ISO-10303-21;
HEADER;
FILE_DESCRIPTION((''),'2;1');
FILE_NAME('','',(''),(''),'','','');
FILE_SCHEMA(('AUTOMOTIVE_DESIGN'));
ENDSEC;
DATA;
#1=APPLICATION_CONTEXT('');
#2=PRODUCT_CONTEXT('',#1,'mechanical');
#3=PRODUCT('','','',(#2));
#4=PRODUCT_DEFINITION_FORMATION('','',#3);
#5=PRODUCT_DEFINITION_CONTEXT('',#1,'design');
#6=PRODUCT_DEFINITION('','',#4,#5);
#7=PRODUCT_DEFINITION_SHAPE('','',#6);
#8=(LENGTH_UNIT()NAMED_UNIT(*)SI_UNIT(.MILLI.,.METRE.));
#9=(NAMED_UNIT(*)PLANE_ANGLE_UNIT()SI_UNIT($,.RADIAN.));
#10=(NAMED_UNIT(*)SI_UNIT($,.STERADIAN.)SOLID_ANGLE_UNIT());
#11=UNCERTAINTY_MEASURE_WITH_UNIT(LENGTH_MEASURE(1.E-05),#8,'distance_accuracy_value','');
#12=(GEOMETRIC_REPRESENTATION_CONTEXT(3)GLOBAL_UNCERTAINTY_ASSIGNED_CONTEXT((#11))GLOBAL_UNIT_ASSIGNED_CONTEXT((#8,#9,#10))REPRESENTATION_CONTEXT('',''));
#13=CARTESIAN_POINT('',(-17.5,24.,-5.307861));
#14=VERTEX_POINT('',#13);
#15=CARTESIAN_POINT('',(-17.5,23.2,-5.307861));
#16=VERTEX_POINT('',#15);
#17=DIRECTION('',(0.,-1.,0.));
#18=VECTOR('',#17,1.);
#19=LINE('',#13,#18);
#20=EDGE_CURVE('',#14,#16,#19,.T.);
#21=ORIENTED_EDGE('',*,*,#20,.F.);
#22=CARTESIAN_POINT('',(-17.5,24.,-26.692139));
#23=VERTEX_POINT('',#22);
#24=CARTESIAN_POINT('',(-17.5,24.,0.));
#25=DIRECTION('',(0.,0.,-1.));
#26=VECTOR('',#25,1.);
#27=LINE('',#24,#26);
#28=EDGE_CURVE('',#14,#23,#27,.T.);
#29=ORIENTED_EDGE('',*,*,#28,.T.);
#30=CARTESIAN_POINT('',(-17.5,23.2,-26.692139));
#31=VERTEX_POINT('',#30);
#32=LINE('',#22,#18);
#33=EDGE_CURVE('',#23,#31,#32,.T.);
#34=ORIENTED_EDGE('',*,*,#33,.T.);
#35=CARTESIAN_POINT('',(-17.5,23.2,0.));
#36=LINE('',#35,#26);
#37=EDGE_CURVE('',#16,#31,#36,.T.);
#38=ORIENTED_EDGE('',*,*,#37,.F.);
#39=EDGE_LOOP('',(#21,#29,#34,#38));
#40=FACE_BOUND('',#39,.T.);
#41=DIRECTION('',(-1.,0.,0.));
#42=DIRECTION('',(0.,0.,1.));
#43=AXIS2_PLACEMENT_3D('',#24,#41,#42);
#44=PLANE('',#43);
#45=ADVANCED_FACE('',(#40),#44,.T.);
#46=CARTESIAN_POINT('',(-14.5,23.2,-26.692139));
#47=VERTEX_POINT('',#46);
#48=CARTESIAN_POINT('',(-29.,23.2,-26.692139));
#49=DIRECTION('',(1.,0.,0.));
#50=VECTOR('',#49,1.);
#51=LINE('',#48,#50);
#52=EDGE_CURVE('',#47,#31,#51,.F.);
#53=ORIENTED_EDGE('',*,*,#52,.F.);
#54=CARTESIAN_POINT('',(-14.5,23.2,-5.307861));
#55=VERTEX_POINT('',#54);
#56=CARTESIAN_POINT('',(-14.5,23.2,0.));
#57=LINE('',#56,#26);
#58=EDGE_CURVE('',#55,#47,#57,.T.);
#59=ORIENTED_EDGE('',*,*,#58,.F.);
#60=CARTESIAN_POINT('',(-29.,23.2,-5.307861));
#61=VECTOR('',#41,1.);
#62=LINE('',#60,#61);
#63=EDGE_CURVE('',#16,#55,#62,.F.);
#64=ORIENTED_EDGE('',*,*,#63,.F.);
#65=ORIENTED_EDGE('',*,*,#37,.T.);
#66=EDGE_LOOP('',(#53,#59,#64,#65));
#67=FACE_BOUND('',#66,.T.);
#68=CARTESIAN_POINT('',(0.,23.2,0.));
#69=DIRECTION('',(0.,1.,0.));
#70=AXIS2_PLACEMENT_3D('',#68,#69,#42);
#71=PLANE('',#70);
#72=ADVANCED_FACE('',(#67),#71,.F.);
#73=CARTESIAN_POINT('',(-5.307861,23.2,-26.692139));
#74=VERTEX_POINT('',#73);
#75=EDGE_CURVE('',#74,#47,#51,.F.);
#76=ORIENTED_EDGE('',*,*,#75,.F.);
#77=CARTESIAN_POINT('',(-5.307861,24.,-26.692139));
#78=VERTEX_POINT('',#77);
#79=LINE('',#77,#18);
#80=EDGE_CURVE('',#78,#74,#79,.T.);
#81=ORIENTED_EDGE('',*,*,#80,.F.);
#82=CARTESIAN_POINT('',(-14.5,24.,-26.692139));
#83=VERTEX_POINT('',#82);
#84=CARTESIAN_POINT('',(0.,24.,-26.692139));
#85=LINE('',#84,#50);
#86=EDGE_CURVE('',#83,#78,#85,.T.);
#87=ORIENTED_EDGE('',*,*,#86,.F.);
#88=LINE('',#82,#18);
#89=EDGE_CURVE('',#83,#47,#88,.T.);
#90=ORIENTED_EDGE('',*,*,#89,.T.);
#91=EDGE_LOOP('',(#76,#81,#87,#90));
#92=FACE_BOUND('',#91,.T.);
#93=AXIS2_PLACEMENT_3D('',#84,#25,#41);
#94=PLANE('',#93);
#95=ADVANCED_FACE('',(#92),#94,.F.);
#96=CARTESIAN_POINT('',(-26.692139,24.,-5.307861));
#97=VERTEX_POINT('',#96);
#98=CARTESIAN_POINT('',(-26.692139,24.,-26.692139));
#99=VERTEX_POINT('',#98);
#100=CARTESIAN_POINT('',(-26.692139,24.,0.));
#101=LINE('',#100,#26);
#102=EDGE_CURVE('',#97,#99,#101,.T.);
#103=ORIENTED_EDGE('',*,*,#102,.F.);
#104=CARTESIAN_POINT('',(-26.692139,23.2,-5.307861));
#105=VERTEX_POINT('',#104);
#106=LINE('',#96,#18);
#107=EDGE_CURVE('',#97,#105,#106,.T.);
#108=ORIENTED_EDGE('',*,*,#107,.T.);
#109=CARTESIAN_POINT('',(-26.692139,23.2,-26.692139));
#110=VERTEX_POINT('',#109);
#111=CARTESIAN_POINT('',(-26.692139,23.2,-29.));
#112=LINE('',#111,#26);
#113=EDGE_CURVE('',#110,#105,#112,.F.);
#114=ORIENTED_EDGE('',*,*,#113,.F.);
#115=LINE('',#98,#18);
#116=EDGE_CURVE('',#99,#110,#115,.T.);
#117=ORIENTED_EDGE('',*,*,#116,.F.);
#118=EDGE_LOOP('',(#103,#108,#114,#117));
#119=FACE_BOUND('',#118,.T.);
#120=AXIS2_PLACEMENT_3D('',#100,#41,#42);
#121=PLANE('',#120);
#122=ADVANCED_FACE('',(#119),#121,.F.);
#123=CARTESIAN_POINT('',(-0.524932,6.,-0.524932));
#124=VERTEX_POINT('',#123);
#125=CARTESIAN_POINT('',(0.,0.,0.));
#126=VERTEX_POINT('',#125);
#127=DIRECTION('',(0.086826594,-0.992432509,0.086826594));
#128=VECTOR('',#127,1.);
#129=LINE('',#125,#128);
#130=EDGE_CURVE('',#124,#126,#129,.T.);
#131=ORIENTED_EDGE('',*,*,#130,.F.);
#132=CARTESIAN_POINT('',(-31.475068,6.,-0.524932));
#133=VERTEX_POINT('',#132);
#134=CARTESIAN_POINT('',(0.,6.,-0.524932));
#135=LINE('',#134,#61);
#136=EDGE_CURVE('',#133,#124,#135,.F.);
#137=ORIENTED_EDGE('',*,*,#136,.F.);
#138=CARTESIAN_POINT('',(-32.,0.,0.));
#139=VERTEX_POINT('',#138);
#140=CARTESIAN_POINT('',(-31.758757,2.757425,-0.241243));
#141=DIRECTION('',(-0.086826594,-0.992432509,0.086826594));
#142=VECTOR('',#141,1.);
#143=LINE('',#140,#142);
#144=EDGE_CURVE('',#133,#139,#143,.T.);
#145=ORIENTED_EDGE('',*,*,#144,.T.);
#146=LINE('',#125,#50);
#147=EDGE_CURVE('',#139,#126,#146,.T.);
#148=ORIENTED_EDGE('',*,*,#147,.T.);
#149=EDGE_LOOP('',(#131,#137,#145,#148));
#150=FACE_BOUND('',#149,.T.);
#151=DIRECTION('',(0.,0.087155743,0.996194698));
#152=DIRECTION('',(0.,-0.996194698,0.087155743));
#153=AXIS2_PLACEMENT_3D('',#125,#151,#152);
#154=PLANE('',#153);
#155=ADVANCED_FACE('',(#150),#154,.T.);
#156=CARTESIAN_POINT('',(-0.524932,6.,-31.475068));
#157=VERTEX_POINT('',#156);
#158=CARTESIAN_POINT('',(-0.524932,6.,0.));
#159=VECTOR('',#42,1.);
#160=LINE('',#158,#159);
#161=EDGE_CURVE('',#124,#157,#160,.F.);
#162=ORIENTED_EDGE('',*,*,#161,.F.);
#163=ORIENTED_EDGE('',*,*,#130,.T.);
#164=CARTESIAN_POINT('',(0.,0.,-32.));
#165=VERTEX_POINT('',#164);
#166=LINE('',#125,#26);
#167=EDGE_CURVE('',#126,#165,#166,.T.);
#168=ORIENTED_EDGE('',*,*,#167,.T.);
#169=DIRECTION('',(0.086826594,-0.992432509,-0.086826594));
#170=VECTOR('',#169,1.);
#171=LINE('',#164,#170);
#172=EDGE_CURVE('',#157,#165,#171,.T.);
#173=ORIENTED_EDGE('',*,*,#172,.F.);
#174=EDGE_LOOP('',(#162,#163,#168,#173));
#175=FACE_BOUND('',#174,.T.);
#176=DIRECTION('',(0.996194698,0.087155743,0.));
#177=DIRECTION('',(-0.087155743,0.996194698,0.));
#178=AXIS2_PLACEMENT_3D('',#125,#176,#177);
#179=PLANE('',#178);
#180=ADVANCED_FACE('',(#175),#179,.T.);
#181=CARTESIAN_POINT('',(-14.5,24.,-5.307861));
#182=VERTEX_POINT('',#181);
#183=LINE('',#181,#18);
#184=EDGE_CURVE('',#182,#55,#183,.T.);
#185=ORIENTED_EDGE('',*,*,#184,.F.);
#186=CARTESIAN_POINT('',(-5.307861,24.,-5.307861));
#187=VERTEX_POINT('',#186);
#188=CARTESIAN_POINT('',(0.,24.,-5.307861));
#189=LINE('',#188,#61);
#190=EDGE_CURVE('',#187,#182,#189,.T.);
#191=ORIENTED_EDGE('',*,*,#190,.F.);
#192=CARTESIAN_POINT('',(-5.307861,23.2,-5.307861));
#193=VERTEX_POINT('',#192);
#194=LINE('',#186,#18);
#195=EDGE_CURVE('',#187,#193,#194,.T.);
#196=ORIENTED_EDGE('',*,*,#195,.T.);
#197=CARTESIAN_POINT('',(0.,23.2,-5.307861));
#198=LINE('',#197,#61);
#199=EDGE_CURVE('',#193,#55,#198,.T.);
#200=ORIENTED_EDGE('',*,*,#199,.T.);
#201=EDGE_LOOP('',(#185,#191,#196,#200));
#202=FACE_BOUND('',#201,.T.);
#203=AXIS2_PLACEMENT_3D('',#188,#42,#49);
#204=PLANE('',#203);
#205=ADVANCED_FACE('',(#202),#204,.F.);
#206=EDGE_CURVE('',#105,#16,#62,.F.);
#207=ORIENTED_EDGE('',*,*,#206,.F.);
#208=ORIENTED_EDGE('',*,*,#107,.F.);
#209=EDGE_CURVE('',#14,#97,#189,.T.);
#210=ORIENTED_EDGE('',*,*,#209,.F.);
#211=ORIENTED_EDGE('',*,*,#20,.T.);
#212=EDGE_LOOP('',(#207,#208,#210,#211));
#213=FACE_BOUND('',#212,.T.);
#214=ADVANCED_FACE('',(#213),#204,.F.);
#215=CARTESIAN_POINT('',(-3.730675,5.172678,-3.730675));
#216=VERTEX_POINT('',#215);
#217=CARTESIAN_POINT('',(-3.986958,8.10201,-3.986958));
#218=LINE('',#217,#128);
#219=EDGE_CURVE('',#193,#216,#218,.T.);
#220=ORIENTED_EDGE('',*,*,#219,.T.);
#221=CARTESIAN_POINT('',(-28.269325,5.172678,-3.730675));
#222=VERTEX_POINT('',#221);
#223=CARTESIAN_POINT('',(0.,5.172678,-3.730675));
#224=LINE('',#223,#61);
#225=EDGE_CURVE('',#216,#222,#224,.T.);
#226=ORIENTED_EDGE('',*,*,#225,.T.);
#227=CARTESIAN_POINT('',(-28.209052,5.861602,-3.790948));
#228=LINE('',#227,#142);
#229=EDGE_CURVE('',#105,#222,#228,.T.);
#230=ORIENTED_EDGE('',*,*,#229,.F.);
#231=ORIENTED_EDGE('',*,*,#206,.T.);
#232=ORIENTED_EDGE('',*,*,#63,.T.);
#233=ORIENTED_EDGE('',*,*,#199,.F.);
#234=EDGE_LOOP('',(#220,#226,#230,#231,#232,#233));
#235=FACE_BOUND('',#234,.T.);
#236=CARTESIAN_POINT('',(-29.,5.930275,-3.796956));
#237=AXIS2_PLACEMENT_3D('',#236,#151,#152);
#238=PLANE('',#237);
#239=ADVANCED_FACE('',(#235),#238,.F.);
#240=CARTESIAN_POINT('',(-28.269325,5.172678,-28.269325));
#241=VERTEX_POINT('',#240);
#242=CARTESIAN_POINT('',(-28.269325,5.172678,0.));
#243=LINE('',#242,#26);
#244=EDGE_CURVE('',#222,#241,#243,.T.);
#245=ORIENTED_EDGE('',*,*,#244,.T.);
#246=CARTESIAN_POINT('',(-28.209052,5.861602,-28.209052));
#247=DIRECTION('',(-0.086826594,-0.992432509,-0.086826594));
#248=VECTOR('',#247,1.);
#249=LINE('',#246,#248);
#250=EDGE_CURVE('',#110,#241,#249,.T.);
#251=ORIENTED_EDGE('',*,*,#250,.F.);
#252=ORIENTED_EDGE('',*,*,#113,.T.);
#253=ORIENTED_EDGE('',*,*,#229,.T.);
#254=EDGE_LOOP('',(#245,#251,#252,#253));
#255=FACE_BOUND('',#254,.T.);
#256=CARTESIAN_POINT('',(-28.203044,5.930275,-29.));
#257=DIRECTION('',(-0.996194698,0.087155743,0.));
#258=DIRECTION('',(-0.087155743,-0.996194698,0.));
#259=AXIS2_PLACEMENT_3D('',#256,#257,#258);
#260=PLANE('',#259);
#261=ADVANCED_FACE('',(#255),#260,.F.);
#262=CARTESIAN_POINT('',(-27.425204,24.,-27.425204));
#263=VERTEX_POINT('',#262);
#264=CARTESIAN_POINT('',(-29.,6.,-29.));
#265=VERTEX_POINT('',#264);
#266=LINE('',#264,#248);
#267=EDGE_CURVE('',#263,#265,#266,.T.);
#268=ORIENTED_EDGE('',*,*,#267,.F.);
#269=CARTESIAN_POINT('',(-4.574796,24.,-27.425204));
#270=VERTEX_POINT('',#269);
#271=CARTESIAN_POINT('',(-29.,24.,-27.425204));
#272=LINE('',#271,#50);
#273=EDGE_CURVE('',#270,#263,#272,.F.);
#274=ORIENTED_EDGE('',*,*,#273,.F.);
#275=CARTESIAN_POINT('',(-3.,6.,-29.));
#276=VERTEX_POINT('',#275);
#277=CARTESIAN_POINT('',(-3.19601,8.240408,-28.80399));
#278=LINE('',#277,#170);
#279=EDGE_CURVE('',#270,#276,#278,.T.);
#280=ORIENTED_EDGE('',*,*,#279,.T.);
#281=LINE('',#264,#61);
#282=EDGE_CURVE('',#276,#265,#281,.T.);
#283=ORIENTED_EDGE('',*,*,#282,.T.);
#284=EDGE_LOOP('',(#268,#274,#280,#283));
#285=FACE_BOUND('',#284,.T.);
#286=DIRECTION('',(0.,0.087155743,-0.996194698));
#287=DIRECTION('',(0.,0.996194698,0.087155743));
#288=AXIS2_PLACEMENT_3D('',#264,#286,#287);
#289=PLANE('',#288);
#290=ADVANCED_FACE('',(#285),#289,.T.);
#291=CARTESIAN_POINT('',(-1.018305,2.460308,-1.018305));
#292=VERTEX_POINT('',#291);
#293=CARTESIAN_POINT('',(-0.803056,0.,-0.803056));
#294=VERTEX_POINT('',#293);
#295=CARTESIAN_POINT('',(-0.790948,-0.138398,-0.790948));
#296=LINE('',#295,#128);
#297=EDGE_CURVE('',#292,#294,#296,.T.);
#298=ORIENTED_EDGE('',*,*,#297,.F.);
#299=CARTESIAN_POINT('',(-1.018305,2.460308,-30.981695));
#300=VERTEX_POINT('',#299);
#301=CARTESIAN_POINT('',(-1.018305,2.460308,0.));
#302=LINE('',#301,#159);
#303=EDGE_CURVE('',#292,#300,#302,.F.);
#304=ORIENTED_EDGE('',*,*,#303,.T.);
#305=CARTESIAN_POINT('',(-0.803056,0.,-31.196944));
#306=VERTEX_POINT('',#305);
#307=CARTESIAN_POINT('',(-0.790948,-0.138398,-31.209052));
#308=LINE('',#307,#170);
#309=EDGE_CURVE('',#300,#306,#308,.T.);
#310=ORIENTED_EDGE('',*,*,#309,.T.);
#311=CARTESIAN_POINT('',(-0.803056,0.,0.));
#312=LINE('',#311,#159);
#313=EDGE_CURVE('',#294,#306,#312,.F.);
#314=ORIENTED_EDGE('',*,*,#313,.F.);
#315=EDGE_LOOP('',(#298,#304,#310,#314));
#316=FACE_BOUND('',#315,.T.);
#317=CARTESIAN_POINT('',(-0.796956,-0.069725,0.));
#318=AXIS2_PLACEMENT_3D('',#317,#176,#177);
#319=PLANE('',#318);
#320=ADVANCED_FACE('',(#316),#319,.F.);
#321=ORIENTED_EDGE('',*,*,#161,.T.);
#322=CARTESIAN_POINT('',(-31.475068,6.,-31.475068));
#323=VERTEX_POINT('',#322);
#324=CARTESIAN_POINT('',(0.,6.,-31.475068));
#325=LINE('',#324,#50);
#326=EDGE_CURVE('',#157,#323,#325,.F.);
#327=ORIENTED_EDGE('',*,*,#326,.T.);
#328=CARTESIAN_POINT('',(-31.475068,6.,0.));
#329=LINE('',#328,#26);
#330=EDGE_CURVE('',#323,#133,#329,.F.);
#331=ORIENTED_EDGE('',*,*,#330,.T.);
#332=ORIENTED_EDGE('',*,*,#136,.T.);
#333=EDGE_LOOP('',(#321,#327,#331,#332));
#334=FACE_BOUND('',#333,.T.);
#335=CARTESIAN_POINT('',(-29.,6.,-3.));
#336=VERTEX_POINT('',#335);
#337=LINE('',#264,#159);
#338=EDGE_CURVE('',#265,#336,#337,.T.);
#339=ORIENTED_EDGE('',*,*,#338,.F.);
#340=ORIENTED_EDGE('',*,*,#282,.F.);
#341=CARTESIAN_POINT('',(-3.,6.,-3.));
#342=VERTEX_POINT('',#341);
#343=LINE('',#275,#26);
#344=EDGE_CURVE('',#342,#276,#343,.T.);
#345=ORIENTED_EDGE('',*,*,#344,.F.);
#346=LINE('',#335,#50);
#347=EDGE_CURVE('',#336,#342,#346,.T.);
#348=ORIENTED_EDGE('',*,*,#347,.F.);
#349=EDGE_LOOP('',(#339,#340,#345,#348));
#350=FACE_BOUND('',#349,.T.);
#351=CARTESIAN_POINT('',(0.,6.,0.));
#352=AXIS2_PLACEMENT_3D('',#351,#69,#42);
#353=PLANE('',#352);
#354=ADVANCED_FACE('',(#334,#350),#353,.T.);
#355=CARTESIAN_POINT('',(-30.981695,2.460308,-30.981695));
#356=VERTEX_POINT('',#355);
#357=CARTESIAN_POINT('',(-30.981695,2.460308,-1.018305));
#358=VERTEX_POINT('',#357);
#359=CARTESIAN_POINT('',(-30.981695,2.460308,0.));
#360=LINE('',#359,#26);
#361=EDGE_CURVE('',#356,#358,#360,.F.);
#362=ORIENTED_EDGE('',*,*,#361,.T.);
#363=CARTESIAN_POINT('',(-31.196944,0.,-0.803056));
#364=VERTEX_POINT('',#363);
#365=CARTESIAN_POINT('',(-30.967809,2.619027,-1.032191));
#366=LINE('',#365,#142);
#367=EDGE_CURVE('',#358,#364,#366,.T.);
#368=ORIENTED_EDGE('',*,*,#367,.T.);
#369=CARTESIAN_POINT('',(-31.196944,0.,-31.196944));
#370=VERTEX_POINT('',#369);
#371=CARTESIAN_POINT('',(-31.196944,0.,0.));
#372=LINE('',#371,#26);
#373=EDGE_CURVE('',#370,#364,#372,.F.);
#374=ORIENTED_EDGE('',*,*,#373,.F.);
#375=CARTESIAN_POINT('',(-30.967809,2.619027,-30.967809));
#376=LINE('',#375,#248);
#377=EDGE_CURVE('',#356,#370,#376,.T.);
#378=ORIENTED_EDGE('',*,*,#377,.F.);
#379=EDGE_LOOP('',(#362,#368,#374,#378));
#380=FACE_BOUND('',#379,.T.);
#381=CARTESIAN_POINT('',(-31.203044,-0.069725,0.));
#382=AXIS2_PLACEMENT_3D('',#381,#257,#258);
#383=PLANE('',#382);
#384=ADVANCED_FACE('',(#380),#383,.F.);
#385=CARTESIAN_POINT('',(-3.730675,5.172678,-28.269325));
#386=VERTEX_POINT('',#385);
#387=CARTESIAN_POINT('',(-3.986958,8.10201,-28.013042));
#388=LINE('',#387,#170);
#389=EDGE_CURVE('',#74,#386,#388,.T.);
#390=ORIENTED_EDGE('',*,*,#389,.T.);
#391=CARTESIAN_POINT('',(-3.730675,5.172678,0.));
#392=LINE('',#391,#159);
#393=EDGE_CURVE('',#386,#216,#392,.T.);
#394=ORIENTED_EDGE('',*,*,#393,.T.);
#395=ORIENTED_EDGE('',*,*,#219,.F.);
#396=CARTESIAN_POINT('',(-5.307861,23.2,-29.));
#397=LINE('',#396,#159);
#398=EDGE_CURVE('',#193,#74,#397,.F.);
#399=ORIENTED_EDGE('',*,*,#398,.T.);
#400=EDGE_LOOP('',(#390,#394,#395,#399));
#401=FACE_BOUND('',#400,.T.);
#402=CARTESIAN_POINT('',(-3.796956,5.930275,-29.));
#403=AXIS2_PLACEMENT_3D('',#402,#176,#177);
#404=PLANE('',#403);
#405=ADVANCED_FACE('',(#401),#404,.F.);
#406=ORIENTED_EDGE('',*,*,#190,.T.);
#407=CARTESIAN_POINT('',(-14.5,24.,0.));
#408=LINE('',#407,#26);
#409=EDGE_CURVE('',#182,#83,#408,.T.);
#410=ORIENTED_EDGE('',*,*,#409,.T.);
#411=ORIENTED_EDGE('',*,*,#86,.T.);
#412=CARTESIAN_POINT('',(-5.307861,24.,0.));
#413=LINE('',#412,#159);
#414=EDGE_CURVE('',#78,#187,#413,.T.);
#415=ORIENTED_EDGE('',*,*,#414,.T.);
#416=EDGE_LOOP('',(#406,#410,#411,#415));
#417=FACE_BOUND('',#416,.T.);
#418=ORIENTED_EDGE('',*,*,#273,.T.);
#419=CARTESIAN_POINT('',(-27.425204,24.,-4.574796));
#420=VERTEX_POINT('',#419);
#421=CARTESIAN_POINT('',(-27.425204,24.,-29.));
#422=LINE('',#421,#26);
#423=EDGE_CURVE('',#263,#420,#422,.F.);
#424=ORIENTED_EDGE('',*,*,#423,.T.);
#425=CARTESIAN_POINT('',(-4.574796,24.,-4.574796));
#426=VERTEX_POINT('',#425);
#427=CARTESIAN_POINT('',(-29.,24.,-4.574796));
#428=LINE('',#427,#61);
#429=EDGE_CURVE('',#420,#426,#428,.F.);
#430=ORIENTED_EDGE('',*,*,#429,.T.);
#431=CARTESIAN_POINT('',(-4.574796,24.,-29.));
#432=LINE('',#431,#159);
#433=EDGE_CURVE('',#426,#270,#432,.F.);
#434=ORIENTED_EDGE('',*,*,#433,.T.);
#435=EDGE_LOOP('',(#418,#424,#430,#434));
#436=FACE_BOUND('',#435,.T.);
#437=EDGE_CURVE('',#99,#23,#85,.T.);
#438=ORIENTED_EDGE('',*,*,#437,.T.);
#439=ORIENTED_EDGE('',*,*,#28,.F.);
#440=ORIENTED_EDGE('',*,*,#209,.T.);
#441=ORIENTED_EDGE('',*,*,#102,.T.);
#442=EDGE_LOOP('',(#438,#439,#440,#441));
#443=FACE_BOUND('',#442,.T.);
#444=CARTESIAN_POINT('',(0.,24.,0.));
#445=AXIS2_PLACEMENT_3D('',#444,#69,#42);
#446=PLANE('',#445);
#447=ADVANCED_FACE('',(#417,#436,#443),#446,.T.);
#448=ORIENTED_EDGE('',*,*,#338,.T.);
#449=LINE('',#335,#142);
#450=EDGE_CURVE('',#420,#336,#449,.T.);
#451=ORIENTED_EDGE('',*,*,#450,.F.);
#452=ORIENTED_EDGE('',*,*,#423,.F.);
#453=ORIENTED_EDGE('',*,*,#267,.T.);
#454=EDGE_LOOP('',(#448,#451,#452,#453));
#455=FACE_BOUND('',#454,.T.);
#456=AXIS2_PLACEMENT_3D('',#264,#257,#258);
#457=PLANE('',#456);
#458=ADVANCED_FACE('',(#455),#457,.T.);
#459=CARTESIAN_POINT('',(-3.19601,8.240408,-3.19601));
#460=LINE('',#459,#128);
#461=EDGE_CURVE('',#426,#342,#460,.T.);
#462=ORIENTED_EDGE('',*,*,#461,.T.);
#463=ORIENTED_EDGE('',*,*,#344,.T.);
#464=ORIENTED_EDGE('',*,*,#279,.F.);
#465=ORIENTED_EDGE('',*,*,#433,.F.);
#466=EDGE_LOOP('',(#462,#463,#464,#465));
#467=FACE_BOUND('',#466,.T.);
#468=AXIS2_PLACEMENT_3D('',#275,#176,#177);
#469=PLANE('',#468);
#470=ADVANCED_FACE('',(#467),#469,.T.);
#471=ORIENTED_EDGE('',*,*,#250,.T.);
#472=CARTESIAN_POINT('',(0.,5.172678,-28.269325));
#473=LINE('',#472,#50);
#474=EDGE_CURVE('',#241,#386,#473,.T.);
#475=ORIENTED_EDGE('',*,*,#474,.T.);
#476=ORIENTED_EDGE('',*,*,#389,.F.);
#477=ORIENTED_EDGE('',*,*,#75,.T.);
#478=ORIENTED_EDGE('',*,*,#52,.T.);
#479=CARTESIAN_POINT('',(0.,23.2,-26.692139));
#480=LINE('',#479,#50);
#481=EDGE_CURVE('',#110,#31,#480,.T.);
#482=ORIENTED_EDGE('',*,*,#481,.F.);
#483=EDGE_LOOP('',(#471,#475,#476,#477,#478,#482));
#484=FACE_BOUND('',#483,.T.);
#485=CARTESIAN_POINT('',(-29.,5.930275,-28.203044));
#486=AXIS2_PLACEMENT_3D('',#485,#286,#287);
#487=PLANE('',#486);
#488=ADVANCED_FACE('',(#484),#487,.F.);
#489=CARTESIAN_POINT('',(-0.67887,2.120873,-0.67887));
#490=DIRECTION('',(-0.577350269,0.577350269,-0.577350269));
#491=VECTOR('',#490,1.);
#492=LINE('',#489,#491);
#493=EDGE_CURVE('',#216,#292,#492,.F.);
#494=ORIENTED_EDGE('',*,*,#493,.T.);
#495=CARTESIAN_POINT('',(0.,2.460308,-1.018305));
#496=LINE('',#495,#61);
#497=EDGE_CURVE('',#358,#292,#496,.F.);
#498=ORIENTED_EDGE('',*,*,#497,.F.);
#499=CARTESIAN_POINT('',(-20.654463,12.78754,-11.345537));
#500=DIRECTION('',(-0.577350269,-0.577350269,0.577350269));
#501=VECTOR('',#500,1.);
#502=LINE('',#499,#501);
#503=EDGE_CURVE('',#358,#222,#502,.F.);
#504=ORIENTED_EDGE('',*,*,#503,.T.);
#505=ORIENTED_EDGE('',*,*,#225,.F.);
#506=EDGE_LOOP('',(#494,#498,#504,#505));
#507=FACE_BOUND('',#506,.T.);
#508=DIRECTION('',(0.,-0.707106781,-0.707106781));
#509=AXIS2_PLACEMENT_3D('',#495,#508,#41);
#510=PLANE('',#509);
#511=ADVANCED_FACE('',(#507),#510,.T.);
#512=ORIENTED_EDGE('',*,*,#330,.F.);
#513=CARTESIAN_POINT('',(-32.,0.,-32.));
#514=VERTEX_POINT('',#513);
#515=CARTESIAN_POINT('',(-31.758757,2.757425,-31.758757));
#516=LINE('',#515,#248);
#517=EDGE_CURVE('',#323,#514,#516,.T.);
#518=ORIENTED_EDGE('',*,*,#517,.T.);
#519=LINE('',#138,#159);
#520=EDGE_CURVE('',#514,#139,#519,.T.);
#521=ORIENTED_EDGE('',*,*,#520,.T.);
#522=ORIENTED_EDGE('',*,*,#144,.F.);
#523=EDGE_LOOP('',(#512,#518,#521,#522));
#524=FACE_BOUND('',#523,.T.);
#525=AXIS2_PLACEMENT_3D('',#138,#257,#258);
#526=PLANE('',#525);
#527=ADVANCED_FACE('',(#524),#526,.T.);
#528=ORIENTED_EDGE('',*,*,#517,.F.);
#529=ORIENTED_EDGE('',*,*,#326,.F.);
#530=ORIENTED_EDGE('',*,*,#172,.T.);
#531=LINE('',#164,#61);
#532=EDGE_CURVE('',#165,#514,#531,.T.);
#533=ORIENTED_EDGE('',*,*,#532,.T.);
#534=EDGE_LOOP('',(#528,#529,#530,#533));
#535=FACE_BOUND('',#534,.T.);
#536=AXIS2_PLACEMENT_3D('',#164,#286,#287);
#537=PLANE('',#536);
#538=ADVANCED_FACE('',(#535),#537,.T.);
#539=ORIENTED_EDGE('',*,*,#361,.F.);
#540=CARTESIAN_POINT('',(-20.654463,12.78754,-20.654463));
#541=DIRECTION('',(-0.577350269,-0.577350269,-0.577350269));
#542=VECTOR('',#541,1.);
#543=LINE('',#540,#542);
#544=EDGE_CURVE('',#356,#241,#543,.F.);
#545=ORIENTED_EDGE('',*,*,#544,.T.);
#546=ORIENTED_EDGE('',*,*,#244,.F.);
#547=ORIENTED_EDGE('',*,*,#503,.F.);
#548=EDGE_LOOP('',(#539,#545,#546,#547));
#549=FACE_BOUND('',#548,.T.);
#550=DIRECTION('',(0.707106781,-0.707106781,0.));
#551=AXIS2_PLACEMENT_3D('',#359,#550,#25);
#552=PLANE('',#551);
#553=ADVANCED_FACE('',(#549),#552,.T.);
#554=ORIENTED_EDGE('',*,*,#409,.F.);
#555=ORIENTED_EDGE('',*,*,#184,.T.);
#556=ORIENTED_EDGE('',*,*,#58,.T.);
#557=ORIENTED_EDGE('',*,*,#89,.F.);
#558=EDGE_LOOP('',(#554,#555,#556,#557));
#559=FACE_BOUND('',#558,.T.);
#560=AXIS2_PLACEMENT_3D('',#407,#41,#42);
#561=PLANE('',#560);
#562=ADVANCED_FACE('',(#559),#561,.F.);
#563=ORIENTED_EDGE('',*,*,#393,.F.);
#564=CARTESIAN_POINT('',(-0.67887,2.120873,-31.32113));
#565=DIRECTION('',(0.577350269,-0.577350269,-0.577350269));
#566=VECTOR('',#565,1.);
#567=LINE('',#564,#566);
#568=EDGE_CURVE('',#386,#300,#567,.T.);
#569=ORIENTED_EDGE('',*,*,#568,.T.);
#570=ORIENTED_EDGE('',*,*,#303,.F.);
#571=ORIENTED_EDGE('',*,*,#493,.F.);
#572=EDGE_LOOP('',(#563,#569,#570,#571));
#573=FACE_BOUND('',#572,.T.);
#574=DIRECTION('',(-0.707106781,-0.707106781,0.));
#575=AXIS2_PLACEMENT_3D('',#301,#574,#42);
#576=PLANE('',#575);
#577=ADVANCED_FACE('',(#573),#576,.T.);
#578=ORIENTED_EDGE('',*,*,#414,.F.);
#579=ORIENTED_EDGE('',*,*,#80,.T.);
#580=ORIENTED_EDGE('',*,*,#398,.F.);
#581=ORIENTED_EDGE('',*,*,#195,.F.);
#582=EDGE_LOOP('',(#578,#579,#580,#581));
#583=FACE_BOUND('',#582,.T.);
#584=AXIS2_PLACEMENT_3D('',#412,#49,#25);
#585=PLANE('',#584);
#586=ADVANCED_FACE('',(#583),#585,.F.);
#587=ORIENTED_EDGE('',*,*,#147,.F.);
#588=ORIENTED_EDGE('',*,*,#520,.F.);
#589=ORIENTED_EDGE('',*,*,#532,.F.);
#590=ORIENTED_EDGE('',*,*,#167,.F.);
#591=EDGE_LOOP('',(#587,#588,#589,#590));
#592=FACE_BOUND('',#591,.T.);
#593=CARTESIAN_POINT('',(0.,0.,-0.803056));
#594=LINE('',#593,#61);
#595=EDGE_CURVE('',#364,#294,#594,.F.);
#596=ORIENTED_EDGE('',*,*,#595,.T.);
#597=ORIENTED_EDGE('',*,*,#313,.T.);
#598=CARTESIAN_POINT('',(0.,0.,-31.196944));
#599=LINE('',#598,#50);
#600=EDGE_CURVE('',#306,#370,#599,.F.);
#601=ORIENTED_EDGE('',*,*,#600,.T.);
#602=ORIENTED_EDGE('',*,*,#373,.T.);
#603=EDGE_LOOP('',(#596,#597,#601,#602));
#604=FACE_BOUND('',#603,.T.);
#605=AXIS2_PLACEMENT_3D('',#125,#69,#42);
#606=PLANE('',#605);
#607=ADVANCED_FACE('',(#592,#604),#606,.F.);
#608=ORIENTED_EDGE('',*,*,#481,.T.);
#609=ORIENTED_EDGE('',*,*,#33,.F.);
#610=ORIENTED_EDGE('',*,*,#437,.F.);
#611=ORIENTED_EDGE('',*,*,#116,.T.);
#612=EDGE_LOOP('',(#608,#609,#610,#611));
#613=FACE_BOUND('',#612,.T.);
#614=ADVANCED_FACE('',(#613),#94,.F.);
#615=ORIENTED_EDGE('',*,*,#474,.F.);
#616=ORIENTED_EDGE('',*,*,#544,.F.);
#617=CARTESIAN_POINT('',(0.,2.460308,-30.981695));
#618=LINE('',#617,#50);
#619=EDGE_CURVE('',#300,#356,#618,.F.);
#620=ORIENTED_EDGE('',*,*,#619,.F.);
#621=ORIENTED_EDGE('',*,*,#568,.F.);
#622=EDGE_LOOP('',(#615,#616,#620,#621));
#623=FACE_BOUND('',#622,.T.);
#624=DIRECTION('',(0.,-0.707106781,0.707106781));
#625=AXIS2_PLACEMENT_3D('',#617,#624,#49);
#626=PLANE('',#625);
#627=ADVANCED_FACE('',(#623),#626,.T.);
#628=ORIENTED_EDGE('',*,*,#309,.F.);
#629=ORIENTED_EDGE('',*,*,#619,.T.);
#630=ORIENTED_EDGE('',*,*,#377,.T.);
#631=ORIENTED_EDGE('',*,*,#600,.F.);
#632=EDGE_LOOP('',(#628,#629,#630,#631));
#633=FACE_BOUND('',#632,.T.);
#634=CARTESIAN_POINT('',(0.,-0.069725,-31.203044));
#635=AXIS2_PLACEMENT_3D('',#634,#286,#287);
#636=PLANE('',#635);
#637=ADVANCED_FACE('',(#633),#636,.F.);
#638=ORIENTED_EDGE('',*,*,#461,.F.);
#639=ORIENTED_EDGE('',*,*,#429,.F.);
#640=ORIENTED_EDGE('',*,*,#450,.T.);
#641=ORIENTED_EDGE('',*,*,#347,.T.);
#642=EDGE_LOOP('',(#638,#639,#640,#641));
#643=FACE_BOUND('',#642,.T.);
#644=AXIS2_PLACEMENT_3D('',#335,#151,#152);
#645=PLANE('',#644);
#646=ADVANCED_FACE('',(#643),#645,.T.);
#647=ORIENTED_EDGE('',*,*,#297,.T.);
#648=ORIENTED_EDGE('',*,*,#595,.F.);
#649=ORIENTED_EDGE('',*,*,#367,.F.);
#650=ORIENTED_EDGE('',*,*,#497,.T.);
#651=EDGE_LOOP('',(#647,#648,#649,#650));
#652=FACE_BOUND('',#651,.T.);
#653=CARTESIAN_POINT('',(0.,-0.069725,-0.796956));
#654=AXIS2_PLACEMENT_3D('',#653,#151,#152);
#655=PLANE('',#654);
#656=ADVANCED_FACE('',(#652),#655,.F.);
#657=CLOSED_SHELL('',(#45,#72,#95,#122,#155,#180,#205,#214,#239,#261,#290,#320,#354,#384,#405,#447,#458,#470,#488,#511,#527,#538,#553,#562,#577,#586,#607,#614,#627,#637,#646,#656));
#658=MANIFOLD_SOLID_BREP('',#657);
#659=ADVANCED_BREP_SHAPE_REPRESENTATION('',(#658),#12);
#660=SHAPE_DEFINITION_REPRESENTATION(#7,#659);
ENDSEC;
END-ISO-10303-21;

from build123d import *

# Parameters (mm, degrees)
SKETCH1_W           = 32
SKETCH1_H           = 32
BOSS_EXTRUDE1_DEPTH = 6
BOSS_EXTRUDE1_TAPER = 5
SKETCH2_W           = 26
SKETCH2_H           = 26
BOSS_EXTRUDE2_DEPTH = 18
BOSS_EXTRUDE2_TAPER = 5
SHELL1_T            = -0.8
CHAMFER1_SIZE       = 2.5
CHAMFER1_SIZE_2     = 2.750157169
SKETCH3_W           = 9.192139117
SKETCH3_H           = 21.384278234
CUT_EXTRUDE1_DEPTH  = 51.855088412


with BuildPart() as part:
    # Sketch1 → Boss-Extrude1 (new body)
    with BuildSketch(Plane(origin=(0, 0, 0), x_dir=(1, 0, 0), z_dir=(0, 1, 0))):
        with Locations((-16, 16)):
            Rectangle(SKETCH1_W, SKETCH1_H)
    extrude(amount=BOSS_EXTRUDE1_DEPTH, taper=BOSS_EXTRUDE1_TAPER)

    # Sketch2 → Boss-Extrude2 (add)
    with BuildSketch(Plane(origin=(0, 6, 0), x_dir=(1, 0, 0), z_dir=(0, 1, 0))):
        with Locations((-16, 16)):
            Rectangle(SKETCH2_W, SKETCH2_H)
    extrude(amount=BOSS_EXTRUDE2_DEPTH, taper=BOSS_EXTRUDE2_TAPER)

    # Shell1
    shell1_openings = [part.faces().sort_by_distance(p)[0] for p in [
        (-16, 0, -16),
    ]]
    offset(amount=SHELL1_T, openings=shell1_openings, kind=Kind.INTERSECTION)

    # Chamfer1
    # the kernel refuses this chamfer: 2.750157169, 2.5 mm, written as the material it adds along each edge
    with BuildSketch(Plane(origin=(5.830274952, 5.2, -1.25799692), x_dir=(0, 0.030161850139926293, -0.9995450278982617), z_dir=(-1, 0, 0))) as chamfer1_piece_1_section:
        Polygon((CHAMFER1_SIZE * 0.999545027898, CHAMFER1_SIZE * 0.0301618501399), (-CHAMFER1_SIZE_2 * 0.117163164513, CHAMFER1_SIZE_2 * 0.993112678869), (0, 0), align=None)
    chamfer1_piece_1 = extrude(amount=43.660549905, mode=Mode.PRIVATE)
    chamfer1_piece_1 = split(chamfer1_piece_1, bisect_by=Plane(origin=(-1.2737044, 5.379537315, -3.779154262), z_dir=(-0.9961946980917455, -0.08715574274765792, 0)), keep=Keep.TOP, mode=Mode.PRIVATE)
    chamfer1_piece_1 = split(chamfer1_piece_1, bisect_by=Plane(origin=(-3.729971497, 5.164641789, -3.779154262), z_dir=(0.9961946980917455, 0.08715574274765821, 0)), keep=Keep.TOP, mode=Mode.PRIVATE)
    chamfer1_piece_1 = split(chamfer1_piece_1, bisect_by=Plane(origin=(-2.501837948, 5.275543614, -3.739674149), z_dir=(0, -0.08715574274765829, -0.9961946980917455)), keep=Keep.TOP, mode=Mode.PRIVATE)
    add(chamfer1_piece_1)
    with BuildSketch(Plane(origin=(5.830274952, 5.2, -1.25799692), x_dir=(0, 0.030161850139926293, -0.9995450278982617), z_dir=(-1, 0, 0))) as chamfer1_piece_2_section:
        Polygon((CHAMFER1_SIZE * 0.999545027898, CHAMFER1_SIZE * 0.0301618501399), (-CHAMFER1_SIZE_2 * 0.117163164513, CHAMFER1_SIZE_2 * 0.993112678869), (0, 0), align=None)
    chamfer1_piece_2 = extrude(amount=43.660549905, mode=Mode.PRIVATE)
    chamfer1_piece_2 = split(chamfer1_piece_2, bisect_by=Plane(origin=(-1.187972058, 4.399612159, -1.99521412), z_dir=(-0.9961946980917455, -0.08715574274765792, 0)), keep=Keep.TOP, mode=Mode.PRIVATE)
    chamfer1_piece_2 = split(chamfer1_piece_2, bisect_by=Plane(origin=(-3.644239154, 4.184716633, -1.99521412), z_dir=(0.9961946980917455, 0.08715574274765821, 0)), keep=Keep.TOP, mode=Mode.PRIVATE)
    chamfer1_piece_2 = split(chamfer1_piece_2, bisect_by=Plane(origin=(-2.416105606, 4.148173113, -3.641042011), z_dir=(0, 0.08715574274765829, 0.9961946980917455)), keep=Keep.TOP, mode=Mode.PRIVATE)
    add(chamfer1_piece_2)
    with BuildSketch(Plane(origin=(5.830274952, 5.2, -1.25799692), x_dir=(0, 0.030161850139926293, -0.9995450278982617), z_dir=(-1, 0, 0))) as chamfer1_piece_3_section:
        Polygon((CHAMFER1_SIZE * 0.999545027898, CHAMFER1_SIZE * 0.0301618501399), (-CHAMFER1_SIZE_2 * 0.117163164513, CHAMFER1_SIZE_2 * 0.993112678869), (0, 0), align=None)
    chamfer1_piece_3 = extrude(amount=43.660549905, mode=Mode.PRIVATE)
    chamfer1_piece_3 = split(chamfer1_piece_3, bisect_by=Plane(origin=(-3.747130429, 5.360769289, -1.993289961), z_dir=(-0.9961946980917455, -0.08715574274765821, 0)), keep=Keep.TOP, mode=Mode.PRIVATE)
    chamfer1_piece_3 = split(chamfer1_piece_3, bisect_by=Plane(origin=(-16, 4.144649452, -3.64073373), z_dir=(0, 0.08715574274765829, 0.9961946980917455)), keep=Keep.TOP, mode=Mode.PRIVATE)
    chamfer1_piece_3 = split(chamfer1_piece_3, bisect_by=Plane(origin=(-28.252869571, 5.360769289, -1.993289961), z_dir=(0.9961946980917455, -0.08715574274765829, 0)), keep=Keep.TOP, mode=Mode.PRIVATE)
    add(chamfer1_piece_3)
    with BuildSketch(Plane(origin=(5.830274952, 5.2, -1.25799692), x_dir=(0, 0.030161850139926293, -0.9995450278982617), z_dir=(-1, 0, 0))) as chamfer1_piece_4_section:
        Polygon((CHAMFER1_SIZE * 0.999545027898, CHAMFER1_SIZE * 0.0301618501399), (-CHAMFER1_SIZE_2 * 0.117163164513, CHAMFER1_SIZE_2 * 0.993112678869), (0, 0), align=None)
    chamfer1_piece_4 = extrude(amount=43.660549905, mode=Mode.PRIVATE)
    chamfer1_piece_4 = split(chamfer1_piece_4, bisect_by=Plane(origin=(-29.498162052, 5.275543614, -3.739674149), z_dir=(0, -0.08715574274765829, -0.9961946980917455)), keep=Keep.TOP, mode=Mode.PRIVATE)
    chamfer1_piece_4 = split(chamfer1_piece_4, bisect_by=Plane(origin=(-28.270028503, 5.164641789, -3.779154262), z_dir=(-0.9961946980917455, 0.08715574274765829, 0)), keep=Keep.TOP, mode=Mode.PRIVATE)
    chamfer1_piece_4 = split(chamfer1_piece_4, bisect_by=Plane(origin=(-30.7262956, 5.379537315, -3.779154262), z_dir=(0.9961946980917455, -0.08715574274765851, 0)), keep=Keep.TOP, mode=Mode.PRIVATE)
    add(chamfer1_piece_4)
    with BuildSketch(Plane(origin=(5.830274952, 5.2, -1.25799692), x_dir=(0, 0.030161850139926293, -0.9995450278982617), z_dir=(-1, 0, 0))) as chamfer1_piece_5_section:
        Polygon((CHAMFER1_SIZE * 0.999545027898, CHAMFER1_SIZE * 0.0301618501399), (-CHAMFER1_SIZE_2 * 0.117163164513, CHAMFER1_SIZE_2 * 0.993112678869), (0, 0), align=None)
    chamfer1_piece_5 = extrude(amount=43.660549905, mode=Mode.PRIVATE)
    chamfer1_piece_5 = split(chamfer1_piece_5, bisect_by=Plane(origin=(-29.583894394, 4.148173113, -3.641042011), z_dir=(0, 0.08715574274765829, 0.9961946980917455)), keep=Keep.TOP, mode=Mode.PRIVATE)
    chamfer1_piece_5 = split(chamfer1_piece_5, bisect_by=Plane(origin=(-28.355760846, 4.184716633, -1.99521412), z_dir=(-0.9961946980917455, 0.08715574274765829, 0)), keep=Keep.TOP, mode=Mode.PRIVATE)
    chamfer1_piece_5 = split(chamfer1_piece_5, bisect_by=Plane(origin=(-30.812027942, 4.399612159, -1.99521412), z_dir=(0.9961946980917455, -0.08715574274765851, 0)), keep=Keep.TOP, mode=Mode.PRIVATE)
    add(chamfer1_piece_5)
    with BuildSketch(Plane(origin=(-30.74200308, 5.2, 5.830274952), x_dir=(0.9995450278982617, 0.030161850139926356, 0), z_dir=(0, 0, -1))) as chamfer1_piece_6_section:
        Polygon((CHAMFER1_SIZE * 0.999545027898, CHAMFER1_SIZE * 0.0301618501399), (-CHAMFER1_SIZE_2 * 0.117163164513, CHAMFER1_SIZE_2 * 0.993112678869), (0, 0), align=None)
    chamfer1_piece_6 = extrude(amount=43.660549905, mode=Mode.PRIVATE)
    chamfer1_piece_6 = split(chamfer1_piece_6, bisect_by=Plane(origin=(-28.220845738, 5.164641789, -3.729971497), z_dir=(0, 0.08715574274765829, 0.9961946980917455)), keep=Keep.TOP, mode=Mode.PRIVATE)
    chamfer1_piece_6 = split(chamfer1_piece_6, bisect_by=Plane(origin=(-28.260325851, 5.275543614, -2.501837948), z_dir=(0.9961946980917455, -0.08715574274765829, 0)), keep=Keep.TOP, mode=Mode.PRIVATE)
    chamfer1_piece_6 = split(chamfer1_piece_6, bisect_by=Plane(origin=(-28.220845738, 5.379537315, -1.2737044), z_dir=(0, -0.08715574274765792, -0.9961946980917455)), keep=Keep.TOP, mode=Mode.PRIVATE)
    add(chamfer1_piece_6)
    with BuildSketch(Plane(origin=(-30.74200308, 5.2, 5.830274952), x_dir=(0.9995450278982617, 0.030161850139926356, 0), z_dir=(0, 0, -1))) as chamfer1_piece_7_section:
        Polygon((CHAMFER1_SIZE * 0.999545027898, CHAMFER1_SIZE * 0.0301618501399), (-CHAMFER1_SIZE_2 * 0.117163164513, CHAMFER1_SIZE_2 * 0.993112678869), (0, 0), align=None)
    chamfer1_piece_7 = extrude(amount=43.660549905, mode=Mode.PRIVATE)
    chamfer1_piece_7 = split(chamfer1_piece_7, bisect_by=Plane(origin=(-30.00478588, 4.184716633, -3.644239154), z_dir=(0, 0.08715574274765829, 0.9961946980917455)), keep=Keep.TOP, mode=Mode.PRIVATE)
    chamfer1_piece_7 = split(chamfer1_piece_7, bisect_by=Plane(origin=(-28.358957989, 4.148173113, -2.416105606), z_dir=(-0.9961946980917455, 0.08715574274765829, 0)), keep=Keep.TOP, mode=Mode.PRIVATE)
    chamfer1_piece_7 = split(chamfer1_piece_7, bisect_by=Plane(origin=(-30.00478588, 4.399612159, -1.187972058), z_dir=(0, -0.08715574274765792, -0.9961946980917455)), keep=Keep.TOP, mode=Mode.PRIVATE)
    add(chamfer1_piece_7)
    with BuildSketch(Plane(origin=(-30.74200308, 5.2, 5.830274952), x_dir=(0.9995450278982617, 0.030161850139926356, 0), z_dir=(0, 0, -1))) as chamfer1_piece_8_section:
        Polygon((CHAMFER1_SIZE * 0.999545027898, CHAMFER1_SIZE * 0.0301618501399), (-CHAMFER1_SIZE_2 * 0.117163164513, CHAMFER1_SIZE_2 * 0.993112678869), (0, 0), align=None)
    chamfer1_piece_8 = extrude(amount=43.660549905, mode=Mode.PRIVATE)
    chamfer1_piece_8 = split(chamfer1_piece_8, bisect_by=Plane(origin=(-30.006710039, 5.360769289, -28.252869571), z_dir=(0, -0.08715574274765829, 0.9961946980917455)), keep=Keep.TOP, mode=Mode.PRIVATE)
    chamfer1_piece_8 = split(chamfer1_piece_8, bisect_by=Plane(origin=(-30.006710039, 5.360769289, -3.747130429), z_dir=(0, -0.08715574274765829, -0.9961946980917455)), keep=Keep.TOP, mode=Mode.PRIVATE)
    chamfer1_piece_8 = split(chamfer1_piece_8, bisect_by=Plane(origin=(-28.35926627, 4.144649452, -16), z_dir=(-0.9961946980917455, 0.08715574274765829, 0)), keep=Keep.TOP, mode=Mode.PRIVATE)
    add(chamfer1_piece_8)
    with BuildSketch(Plane(origin=(-30.74200308, 5.2, 5.830274952), x_dir=(0.9995450278982617, 0.030161850139926356, 0), z_dir=(0, 0, -1))) as chamfer1_piece_9_section:
        Polygon((CHAMFER1_SIZE * 0.999545027898, CHAMFER1_SIZE * 0.0301618501399), (-CHAMFER1_SIZE_2 * 0.117163164513, CHAMFER1_SIZE_2 * 0.993112678869), (0, 0), align=None)
    chamfer1_piece_9 = extrude(amount=43.660549905, mode=Mode.PRIVATE)
    chamfer1_piece_9 = split(chamfer1_piece_9, bisect_by=Plane(origin=(-28.220845738, 5.379537315, -30.7262956), z_dir=(0, -0.08715574274765836, 0.9961946980917455)), keep=Keep.TOP, mode=Mode.PRIVATE)
    chamfer1_piece_9 = split(chamfer1_piece_9, bisect_by=Plane(origin=(-28.220845738, 5.164641789, -28.270028503), z_dir=(0, 0.08715574274765829, -0.9961946980917455)), keep=Keep.TOP, mode=Mode.PRIVATE)
    chamfer1_piece_9 = split(chamfer1_piece_9, bisect_by=Plane(origin=(-28.260325851, 5.275543614, -29.498162052), z_dir=(0.9961946980917455, -0.08715574274765829, 0)), keep=Keep.TOP, mode=Mode.PRIVATE)
    add(chamfer1_piece_9)
    with BuildSketch(Plane(origin=(-30.74200308, 5.2, 5.830274952), x_dir=(0.9995450278982617, 0.030161850139926356, 0), z_dir=(0, 0, -1))) as chamfer1_piece_10_section:
        Polygon((CHAMFER1_SIZE * 0.999545027898, CHAMFER1_SIZE * 0.0301618501399), (-CHAMFER1_SIZE_2 * 0.117163164513, CHAMFER1_SIZE_2 * 0.993112678869), (0, 0), align=None)
    chamfer1_piece_10 = extrude(amount=43.660549905, mode=Mode.PRIVATE)
    chamfer1_piece_10 = split(chamfer1_piece_10, bisect_by=Plane(origin=(-30.00478588, 4.399612159, -30.812027942), z_dir=(0, -0.08715574274765836, 0.9961946980917455)), keep=Keep.TOP, mode=Mode.PRIVATE)
    chamfer1_piece_10 = split(chamfer1_piece_10, bisect_by=Plane(origin=(-30.00478588, 4.184716633, -28.355760846), z_dir=(0, 0.08715574274765829, -0.9961946980917455)), keep=Keep.TOP, mode=Mode.PRIVATE)
    chamfer1_piece_10 = split(chamfer1_piece_10, bisect_by=Plane(origin=(-28.358957989, 4.148173113, -29.583894394), z_dir=(-0.9961946980917455, 0.08715574274765829, 0)), keep=Keep.TOP, mode=Mode.PRIVATE)
    add(chamfer1_piece_10)
    with BuildSketch(Plane(origin=(5.830274952, 5.2, -30.74200308), x_dir=(0, -0.9937112432628153, -0.11197305485280758), z_dir=(-1, 0, 0))) as chamfer1_piece_11_section:
        Polygon((CHAMFER1_SIZE_2 * 0.99968896676, CHAMFER1_SIZE_2 * 0.0249393220908), (-CHAMFER1_SIZE * 0.111973054853, CHAMFER1_SIZE * 0.993711243263), (0, 0), align=None)
    chamfer1_piece_11 = extrude(amount=43.660549905, mode=Mode.PRIVATE)
    chamfer1_piece_11 = split(chamfer1_piece_11, bisect_by=Plane(origin=(-1.187972058, 4.399612159, -30.00478588), z_dir=(-0.9961946980917455, -0.08715574274765792, 0)), keep=Keep.TOP, mode=Mode.PRIVATE)
    chamfer1_piece_11 = split(chamfer1_piece_11, bisect_by=Plane(origin=(-2.416105606, 4.148173113, -28.358957989), z_dir=(0, 0.08715574274765829, -0.9961946980917455)), keep=Keep.TOP, mode=Mode.PRIVATE)
    chamfer1_piece_11 = split(chamfer1_piece_11, bisect_by=Plane(origin=(-3.644239154, 4.184716633, -30.00478588), z_dir=(0.9961946980917455, 0.08715574274765821, 0)), keep=Keep.TOP, mode=Mode.PRIVATE)
    add(chamfer1_piece_11)
    with BuildSketch(Plane(origin=(5.830274952, 5.2, -30.74200308), x_dir=(0, -0.9937112432628153, -0.11197305485280758), z_dir=(-1, 0, 0))) as chamfer1_piece_12_section:
        Polygon((CHAMFER1_SIZE_2 * 0.99968896676, CHAMFER1_SIZE_2 * 0.0249393220908), (-CHAMFER1_SIZE * 0.111973054853, CHAMFER1_SIZE * 0.993711243263), (0, 0), align=None)
    chamfer1_piece_12 = extrude(amount=43.660549905, mode=Mode.PRIVATE)
    chamfer1_piece_12 = split(chamfer1_piece_12, bisect_by=Plane(origin=(-1.2737044, 5.379537315, -28.220845738), z_dir=(-0.9961946980917455, -0.08715574274765792, 0)), keep=Keep.TOP, mode=Mode.PRIVATE)
    chamfer1_piece_12 = split(chamfer1_piece_12, bisect_by=Plane(origin=(-2.501837948, 5.275543614, -28.260325851), z_dir=(0, -0.08715574274765829, 0.9961946980917455)), keep=Keep.TOP, mode=Mode.PRIVATE)
    chamfer1_piece_12 = split(chamfer1_piece_12, bisect_by=Plane(origin=(-3.729971497, 5.164641789, -28.220845738), z_dir=(0.9961946980917455, 0.08715574274765821, 0)), keep=Keep.TOP, mode=Mode.PRIVATE)
    add(chamfer1_piece_12)
    with BuildSketch(Plane(origin=(5.830274952, 5.2, -30.74200308), x_dir=(0, -0.9937112432628153, -0.11197305485280758), z_dir=(-1, 0, 0))) as chamfer1_piece_13_section:
        Polygon((CHAMFER1_SIZE_2 * 0.99968896676, CHAMFER1_SIZE_2 * 0.0249393220908), (-CHAMFER1_SIZE * 0.111973054853, CHAMFER1_SIZE * 0.993711243263), (0, 0), align=None)
    chamfer1_piece_13 = extrude(amount=43.660549905, mode=Mode.PRIVATE)
    chamfer1_piece_13 = split(chamfer1_piece_13, bisect_by=Plane(origin=(-16, 4.144649452, -28.35926627), z_dir=(0, 0.08715574274765829, -0.9961946980917455)), keep=Keep.TOP, mode=Mode.PRIVATE)
    chamfer1_piece_13 = split(chamfer1_piece_13, bisect_by=Plane(origin=(-3.747130429, 5.360769289, -30.006710039), z_dir=(-0.9961946980917455, -0.08715574274765821, 0)), keep=Keep.TOP, mode=Mode.PRIVATE)
    chamfer1_piece_13 = split(chamfer1_piece_13, bisect_by=Plane(origin=(-28.252869571, 5.360769289, -30.006710039), z_dir=(0.9961946980917455, -0.08715574274765829, 0)), keep=Keep.TOP, mode=Mode.PRIVATE)
    add(chamfer1_piece_13)
    with BuildSketch(Plane(origin=(5.830274952, 5.2, -30.74200308), x_dir=(0, -0.9937112432628153, -0.11197305485280758), z_dir=(-1, 0, 0))) as chamfer1_piece_14_section:
        Polygon((CHAMFER1_SIZE_2 * 0.99968896676, CHAMFER1_SIZE_2 * 0.0249393220908), (-CHAMFER1_SIZE * 0.111973054853, CHAMFER1_SIZE * 0.993711243263), (0, 0), align=None)
    chamfer1_piece_14 = extrude(amount=43.660549905, mode=Mode.PRIVATE)
    chamfer1_piece_14 = split(chamfer1_piece_14, bisect_by=Plane(origin=(-30.812027942, 4.399612159, -30.00478588), z_dir=(0.9961946980917455, -0.08715574274765851, 0)), keep=Keep.TOP, mode=Mode.PRIVATE)
    chamfer1_piece_14 = split(chamfer1_piece_14, bisect_by=Plane(origin=(-29.583894394, 4.148173113, -28.358957989), z_dir=(0, 0.08715574274765829, -0.9961946980917455)), keep=Keep.TOP, mode=Mode.PRIVATE)
    chamfer1_piece_14 = split(chamfer1_piece_14, bisect_by=Plane(origin=(-28.355760846, 4.184716633, -30.00478588), z_dir=(-0.9961946980917455, 0.08715574274765829, 0)), keep=Keep.TOP, mode=Mode.PRIVATE)
    add(chamfer1_piece_14)
    with BuildSketch(Plane(origin=(5.830274952, 5.2, -30.74200308), x_dir=(0, -0.9937112432628153, -0.11197305485280758), z_dir=(-1, 0, 0))) as chamfer1_piece_15_section:
        Polygon((CHAMFER1_SIZE_2 * 0.99968896676, CHAMFER1_SIZE_2 * 0.0249393220908), (-CHAMFER1_SIZE * 0.111973054853, CHAMFER1_SIZE * 0.993711243263), (0, 0), align=None)
    chamfer1_piece_15 = extrude(amount=43.660549905, mode=Mode.PRIVATE)
    chamfer1_piece_15 = split(chamfer1_piece_15, bisect_by=Plane(origin=(-30.7262956, 5.379537315, -28.220845738), z_dir=(0.9961946980917455, -0.08715574274765851, 0)), keep=Keep.TOP, mode=Mode.PRIVATE)
    chamfer1_piece_15 = split(chamfer1_piece_15, bisect_by=Plane(origin=(-29.498162052, 5.275543614, -28.260325851), z_dir=(0, -0.08715574274765829, 0.9961946980917455)), keep=Keep.TOP, mode=Mode.PRIVATE)
    chamfer1_piece_15 = split(chamfer1_piece_15, bisect_by=Plane(origin=(-28.270028503, 5.164641789, -28.220845738), z_dir=(-0.9961946980917455, 0.08715574274765829, 0)), keep=Keep.TOP, mode=Mode.PRIVATE)
    add(chamfer1_piece_15)
    with BuildSketch(Plane(origin=(-1.25799692, 5.2, 5.830274952), x_dir=(0.11197305485280797, -0.9937112432628151, 0), z_dir=(0, 0, -1))) as chamfer1_piece_16_section:
        Polygon((CHAMFER1_SIZE_2 * 0.99968896676, CHAMFER1_SIZE_2 * 0.0249393220908), (-CHAMFER1_SIZE * 0.111973054853, CHAMFER1_SIZE * 0.993711243263), (0, 0), align=None)
    chamfer1_piece_16 = extrude(amount=43.660549905, mode=Mode.PRIVATE)
    chamfer1_piece_16 = split(chamfer1_piece_16, bisect_by=Plane(origin=(-1.99521412, 4.399612159, -1.187972058), z_dir=(0, -0.08715574274765792, -0.9961946980917455)), keep=Keep.TOP, mode=Mode.PRIVATE)
    chamfer1_piece_16 = split(chamfer1_piece_16, bisect_by=Plane(origin=(-3.641042011, 4.148173113, -2.416105606), z_dir=(0.9961946980917455, 0.08715574274765821, 0)), keep=Keep.TOP, mode=Mode.PRIVATE)
    chamfer1_piece_16 = split(chamfer1_piece_16, bisect_by=Plane(origin=(-1.99521412, 4.184716633, -3.644239154), z_dir=(0, 0.08715574274765829, 0.9961946980917455)), keep=Keep.TOP, mode=Mode.PRIVATE)
    add(chamfer1_piece_16)
    with BuildSketch(Plane(origin=(-1.25799692, 5.2, 5.830274952), x_dir=(0.11197305485280797, -0.9937112432628151, 0), z_dir=(0, 0, -1))) as chamfer1_piece_17_section:
        Polygon((CHAMFER1_SIZE_2 * 0.99968896676, CHAMFER1_SIZE_2 * 0.0249393220908), (-CHAMFER1_SIZE * 0.111973054853, CHAMFER1_SIZE * 0.993711243263), (0, 0), align=None)
    chamfer1_piece_17 = extrude(amount=43.660549905, mode=Mode.PRIVATE)
    chamfer1_piece_17 = split(chamfer1_piece_17, bisect_by=Plane(origin=(-3.779154262, 5.379537315, -1.2737044), z_dir=(0, -0.08715574274765792, -0.9961946980917455)), keep=Keep.TOP, mode=Mode.PRIVATE)
    chamfer1_piece_17 = split(chamfer1_piece_17, bisect_by=Plane(origin=(-3.739674149, 5.275543614, -2.501837948), z_dir=(-0.9961946980917455, -0.08715574274765821, 0)), keep=Keep.TOP, mode=Mode.PRIVATE)
    chamfer1_piece_17 = split(chamfer1_piece_17, bisect_by=Plane(origin=(-3.779154262, 5.164641789, -3.729971497), z_dir=(0, 0.08715574274765829, 0.9961946980917455)), keep=Keep.TOP, mode=Mode.PRIVATE)
    add(chamfer1_piece_17)
    with BuildSketch(Plane(origin=(-1.25799692, 5.2, 5.830274952), x_dir=(0.11197305485280797, -0.9937112432628151, 0), z_dir=(0, 0, -1))) as chamfer1_piece_18_section:
        Polygon((CHAMFER1_SIZE_2 * 0.99968896676, CHAMFER1_SIZE_2 * 0.0249393220908), (-CHAMFER1_SIZE * 0.111973054853, CHAMFER1_SIZE * 0.993711243263), (0, 0), align=None)
    chamfer1_piece_18 = extrude(amount=43.660549905, mode=Mode.PRIVATE)
    chamfer1_piece_18 = split(chamfer1_piece_18, bisect_by=Plane(origin=(-1.993289961, 5.360769289, -28.252869571), z_dir=(0, -0.08715574274765829, 0.9961946980917455)), keep=Keep.TOP, mode=Mode.PRIVATE)
    chamfer1_piece_18 = split(chamfer1_piece_18, bisect_by=Plane(origin=(-3.64073373, 4.144649452, -16), z_dir=(0.9961946980917455, 0.08715574274765821, 0)), keep=Keep.TOP, mode=Mode.PRIVATE)
    chamfer1_piece_18 = split(chamfer1_piece_18, bisect_by=Plane(origin=(-1.993289961, 5.360769289, -3.747130429), z_dir=(0, -0.08715574274765829, -0.9961946980917455)), keep=Keep.TOP, mode=Mode.PRIVATE)
    add(chamfer1_piece_18)
    with BuildSketch(Plane(origin=(-1.25799692, 5.2, 5.830274952), x_dir=(0.11197305485280797, -0.9937112432628151, 0), z_dir=(0, 0, -1))) as chamfer1_piece_19_section:
        Polygon((CHAMFER1_SIZE_2 * 0.99968896676, CHAMFER1_SIZE_2 * 0.0249393220908), (-CHAMFER1_SIZE * 0.111973054853, CHAMFER1_SIZE * 0.993711243263), (0, 0), align=None)
    chamfer1_piece_19 = extrude(amount=43.660549905, mode=Mode.PRIVATE)
    chamfer1_piece_19 = split(chamfer1_piece_19, bisect_by=Plane(origin=(-1.99521412, 4.399612159, -30.812027942), z_dir=(0, -0.08715574274765836, 0.9961946980917455)), keep=Keep.TOP, mode=Mode.PRIVATE)
    chamfer1_piece_19 = split(chamfer1_piece_19, bisect_by=Plane(origin=(-1.99521412, 4.184716633, -28.355760846), z_dir=(0, 0.08715574274765829, -0.9961946980917455)), keep=Keep.TOP, mode=Mode.PRIVATE)
    chamfer1_piece_19 = split(chamfer1_piece_19, bisect_by=Plane(origin=(-3.641042011, 4.148173113, -29.583894394), z_dir=(0.9961946980917455, 0.08715574274765821, 0)), keep=Keep.TOP, mode=Mode.PRIVATE)
    add(chamfer1_piece_19)
    with BuildSketch(Plane(origin=(-1.25799692, 5.2, 5.830274952), x_dir=(0.11197305485280797, -0.9937112432628151, 0), z_dir=(0, 0, -1))) as chamfer1_piece_20_section:
        Polygon((CHAMFER1_SIZE_2 * 0.99968896676, CHAMFER1_SIZE_2 * 0.0249393220908), (-CHAMFER1_SIZE * 0.111973054853, CHAMFER1_SIZE * 0.993711243263), (0, 0), align=None)
    chamfer1_piece_20 = extrude(amount=43.660549905, mode=Mode.PRIVATE)
    chamfer1_piece_20 = split(chamfer1_piece_20, bisect_by=Plane(origin=(-3.779154262, 5.379537315, -30.7262956), z_dir=(0, -0.08715574274765836, 0.9961946980917455)), keep=Keep.TOP, mode=Mode.PRIVATE)
    chamfer1_piece_20 = split(chamfer1_piece_20, bisect_by=Plane(origin=(-3.779154262, 5.164641789, -28.270028503), z_dir=(0, 0.08715574274765829, -0.9961946980917455)), keep=Keep.TOP, mode=Mode.PRIVATE)
    chamfer1_piece_20 = split(chamfer1_piece_20, bisect_by=Plane(origin=(-3.739674149, 5.275543614, -29.498162052), z_dir=(-0.9961946980917455, -0.08715574274765821, 0)), keep=Keep.TOP, mode=Mode.PRIVATE)
    add(chamfer1_piece_20)

    # Sketch3 → Cut-Extrude1 (cut, through all)
    with BuildSketch(Plane.XZ.offset(-23.2)):
        with Locations((-22.096069558, -16)):
            Rectangle(SKETCH3_W, SKETCH3_H)
        with Locations((-9.903930442, -16)):
            Rectangle(SKETCH3_W, SKETCH3_H)
    extrude(amount=-CUT_EXTRUDE1_DEPTH, mode=Mode.SUBTRACT)


solid = part.part
